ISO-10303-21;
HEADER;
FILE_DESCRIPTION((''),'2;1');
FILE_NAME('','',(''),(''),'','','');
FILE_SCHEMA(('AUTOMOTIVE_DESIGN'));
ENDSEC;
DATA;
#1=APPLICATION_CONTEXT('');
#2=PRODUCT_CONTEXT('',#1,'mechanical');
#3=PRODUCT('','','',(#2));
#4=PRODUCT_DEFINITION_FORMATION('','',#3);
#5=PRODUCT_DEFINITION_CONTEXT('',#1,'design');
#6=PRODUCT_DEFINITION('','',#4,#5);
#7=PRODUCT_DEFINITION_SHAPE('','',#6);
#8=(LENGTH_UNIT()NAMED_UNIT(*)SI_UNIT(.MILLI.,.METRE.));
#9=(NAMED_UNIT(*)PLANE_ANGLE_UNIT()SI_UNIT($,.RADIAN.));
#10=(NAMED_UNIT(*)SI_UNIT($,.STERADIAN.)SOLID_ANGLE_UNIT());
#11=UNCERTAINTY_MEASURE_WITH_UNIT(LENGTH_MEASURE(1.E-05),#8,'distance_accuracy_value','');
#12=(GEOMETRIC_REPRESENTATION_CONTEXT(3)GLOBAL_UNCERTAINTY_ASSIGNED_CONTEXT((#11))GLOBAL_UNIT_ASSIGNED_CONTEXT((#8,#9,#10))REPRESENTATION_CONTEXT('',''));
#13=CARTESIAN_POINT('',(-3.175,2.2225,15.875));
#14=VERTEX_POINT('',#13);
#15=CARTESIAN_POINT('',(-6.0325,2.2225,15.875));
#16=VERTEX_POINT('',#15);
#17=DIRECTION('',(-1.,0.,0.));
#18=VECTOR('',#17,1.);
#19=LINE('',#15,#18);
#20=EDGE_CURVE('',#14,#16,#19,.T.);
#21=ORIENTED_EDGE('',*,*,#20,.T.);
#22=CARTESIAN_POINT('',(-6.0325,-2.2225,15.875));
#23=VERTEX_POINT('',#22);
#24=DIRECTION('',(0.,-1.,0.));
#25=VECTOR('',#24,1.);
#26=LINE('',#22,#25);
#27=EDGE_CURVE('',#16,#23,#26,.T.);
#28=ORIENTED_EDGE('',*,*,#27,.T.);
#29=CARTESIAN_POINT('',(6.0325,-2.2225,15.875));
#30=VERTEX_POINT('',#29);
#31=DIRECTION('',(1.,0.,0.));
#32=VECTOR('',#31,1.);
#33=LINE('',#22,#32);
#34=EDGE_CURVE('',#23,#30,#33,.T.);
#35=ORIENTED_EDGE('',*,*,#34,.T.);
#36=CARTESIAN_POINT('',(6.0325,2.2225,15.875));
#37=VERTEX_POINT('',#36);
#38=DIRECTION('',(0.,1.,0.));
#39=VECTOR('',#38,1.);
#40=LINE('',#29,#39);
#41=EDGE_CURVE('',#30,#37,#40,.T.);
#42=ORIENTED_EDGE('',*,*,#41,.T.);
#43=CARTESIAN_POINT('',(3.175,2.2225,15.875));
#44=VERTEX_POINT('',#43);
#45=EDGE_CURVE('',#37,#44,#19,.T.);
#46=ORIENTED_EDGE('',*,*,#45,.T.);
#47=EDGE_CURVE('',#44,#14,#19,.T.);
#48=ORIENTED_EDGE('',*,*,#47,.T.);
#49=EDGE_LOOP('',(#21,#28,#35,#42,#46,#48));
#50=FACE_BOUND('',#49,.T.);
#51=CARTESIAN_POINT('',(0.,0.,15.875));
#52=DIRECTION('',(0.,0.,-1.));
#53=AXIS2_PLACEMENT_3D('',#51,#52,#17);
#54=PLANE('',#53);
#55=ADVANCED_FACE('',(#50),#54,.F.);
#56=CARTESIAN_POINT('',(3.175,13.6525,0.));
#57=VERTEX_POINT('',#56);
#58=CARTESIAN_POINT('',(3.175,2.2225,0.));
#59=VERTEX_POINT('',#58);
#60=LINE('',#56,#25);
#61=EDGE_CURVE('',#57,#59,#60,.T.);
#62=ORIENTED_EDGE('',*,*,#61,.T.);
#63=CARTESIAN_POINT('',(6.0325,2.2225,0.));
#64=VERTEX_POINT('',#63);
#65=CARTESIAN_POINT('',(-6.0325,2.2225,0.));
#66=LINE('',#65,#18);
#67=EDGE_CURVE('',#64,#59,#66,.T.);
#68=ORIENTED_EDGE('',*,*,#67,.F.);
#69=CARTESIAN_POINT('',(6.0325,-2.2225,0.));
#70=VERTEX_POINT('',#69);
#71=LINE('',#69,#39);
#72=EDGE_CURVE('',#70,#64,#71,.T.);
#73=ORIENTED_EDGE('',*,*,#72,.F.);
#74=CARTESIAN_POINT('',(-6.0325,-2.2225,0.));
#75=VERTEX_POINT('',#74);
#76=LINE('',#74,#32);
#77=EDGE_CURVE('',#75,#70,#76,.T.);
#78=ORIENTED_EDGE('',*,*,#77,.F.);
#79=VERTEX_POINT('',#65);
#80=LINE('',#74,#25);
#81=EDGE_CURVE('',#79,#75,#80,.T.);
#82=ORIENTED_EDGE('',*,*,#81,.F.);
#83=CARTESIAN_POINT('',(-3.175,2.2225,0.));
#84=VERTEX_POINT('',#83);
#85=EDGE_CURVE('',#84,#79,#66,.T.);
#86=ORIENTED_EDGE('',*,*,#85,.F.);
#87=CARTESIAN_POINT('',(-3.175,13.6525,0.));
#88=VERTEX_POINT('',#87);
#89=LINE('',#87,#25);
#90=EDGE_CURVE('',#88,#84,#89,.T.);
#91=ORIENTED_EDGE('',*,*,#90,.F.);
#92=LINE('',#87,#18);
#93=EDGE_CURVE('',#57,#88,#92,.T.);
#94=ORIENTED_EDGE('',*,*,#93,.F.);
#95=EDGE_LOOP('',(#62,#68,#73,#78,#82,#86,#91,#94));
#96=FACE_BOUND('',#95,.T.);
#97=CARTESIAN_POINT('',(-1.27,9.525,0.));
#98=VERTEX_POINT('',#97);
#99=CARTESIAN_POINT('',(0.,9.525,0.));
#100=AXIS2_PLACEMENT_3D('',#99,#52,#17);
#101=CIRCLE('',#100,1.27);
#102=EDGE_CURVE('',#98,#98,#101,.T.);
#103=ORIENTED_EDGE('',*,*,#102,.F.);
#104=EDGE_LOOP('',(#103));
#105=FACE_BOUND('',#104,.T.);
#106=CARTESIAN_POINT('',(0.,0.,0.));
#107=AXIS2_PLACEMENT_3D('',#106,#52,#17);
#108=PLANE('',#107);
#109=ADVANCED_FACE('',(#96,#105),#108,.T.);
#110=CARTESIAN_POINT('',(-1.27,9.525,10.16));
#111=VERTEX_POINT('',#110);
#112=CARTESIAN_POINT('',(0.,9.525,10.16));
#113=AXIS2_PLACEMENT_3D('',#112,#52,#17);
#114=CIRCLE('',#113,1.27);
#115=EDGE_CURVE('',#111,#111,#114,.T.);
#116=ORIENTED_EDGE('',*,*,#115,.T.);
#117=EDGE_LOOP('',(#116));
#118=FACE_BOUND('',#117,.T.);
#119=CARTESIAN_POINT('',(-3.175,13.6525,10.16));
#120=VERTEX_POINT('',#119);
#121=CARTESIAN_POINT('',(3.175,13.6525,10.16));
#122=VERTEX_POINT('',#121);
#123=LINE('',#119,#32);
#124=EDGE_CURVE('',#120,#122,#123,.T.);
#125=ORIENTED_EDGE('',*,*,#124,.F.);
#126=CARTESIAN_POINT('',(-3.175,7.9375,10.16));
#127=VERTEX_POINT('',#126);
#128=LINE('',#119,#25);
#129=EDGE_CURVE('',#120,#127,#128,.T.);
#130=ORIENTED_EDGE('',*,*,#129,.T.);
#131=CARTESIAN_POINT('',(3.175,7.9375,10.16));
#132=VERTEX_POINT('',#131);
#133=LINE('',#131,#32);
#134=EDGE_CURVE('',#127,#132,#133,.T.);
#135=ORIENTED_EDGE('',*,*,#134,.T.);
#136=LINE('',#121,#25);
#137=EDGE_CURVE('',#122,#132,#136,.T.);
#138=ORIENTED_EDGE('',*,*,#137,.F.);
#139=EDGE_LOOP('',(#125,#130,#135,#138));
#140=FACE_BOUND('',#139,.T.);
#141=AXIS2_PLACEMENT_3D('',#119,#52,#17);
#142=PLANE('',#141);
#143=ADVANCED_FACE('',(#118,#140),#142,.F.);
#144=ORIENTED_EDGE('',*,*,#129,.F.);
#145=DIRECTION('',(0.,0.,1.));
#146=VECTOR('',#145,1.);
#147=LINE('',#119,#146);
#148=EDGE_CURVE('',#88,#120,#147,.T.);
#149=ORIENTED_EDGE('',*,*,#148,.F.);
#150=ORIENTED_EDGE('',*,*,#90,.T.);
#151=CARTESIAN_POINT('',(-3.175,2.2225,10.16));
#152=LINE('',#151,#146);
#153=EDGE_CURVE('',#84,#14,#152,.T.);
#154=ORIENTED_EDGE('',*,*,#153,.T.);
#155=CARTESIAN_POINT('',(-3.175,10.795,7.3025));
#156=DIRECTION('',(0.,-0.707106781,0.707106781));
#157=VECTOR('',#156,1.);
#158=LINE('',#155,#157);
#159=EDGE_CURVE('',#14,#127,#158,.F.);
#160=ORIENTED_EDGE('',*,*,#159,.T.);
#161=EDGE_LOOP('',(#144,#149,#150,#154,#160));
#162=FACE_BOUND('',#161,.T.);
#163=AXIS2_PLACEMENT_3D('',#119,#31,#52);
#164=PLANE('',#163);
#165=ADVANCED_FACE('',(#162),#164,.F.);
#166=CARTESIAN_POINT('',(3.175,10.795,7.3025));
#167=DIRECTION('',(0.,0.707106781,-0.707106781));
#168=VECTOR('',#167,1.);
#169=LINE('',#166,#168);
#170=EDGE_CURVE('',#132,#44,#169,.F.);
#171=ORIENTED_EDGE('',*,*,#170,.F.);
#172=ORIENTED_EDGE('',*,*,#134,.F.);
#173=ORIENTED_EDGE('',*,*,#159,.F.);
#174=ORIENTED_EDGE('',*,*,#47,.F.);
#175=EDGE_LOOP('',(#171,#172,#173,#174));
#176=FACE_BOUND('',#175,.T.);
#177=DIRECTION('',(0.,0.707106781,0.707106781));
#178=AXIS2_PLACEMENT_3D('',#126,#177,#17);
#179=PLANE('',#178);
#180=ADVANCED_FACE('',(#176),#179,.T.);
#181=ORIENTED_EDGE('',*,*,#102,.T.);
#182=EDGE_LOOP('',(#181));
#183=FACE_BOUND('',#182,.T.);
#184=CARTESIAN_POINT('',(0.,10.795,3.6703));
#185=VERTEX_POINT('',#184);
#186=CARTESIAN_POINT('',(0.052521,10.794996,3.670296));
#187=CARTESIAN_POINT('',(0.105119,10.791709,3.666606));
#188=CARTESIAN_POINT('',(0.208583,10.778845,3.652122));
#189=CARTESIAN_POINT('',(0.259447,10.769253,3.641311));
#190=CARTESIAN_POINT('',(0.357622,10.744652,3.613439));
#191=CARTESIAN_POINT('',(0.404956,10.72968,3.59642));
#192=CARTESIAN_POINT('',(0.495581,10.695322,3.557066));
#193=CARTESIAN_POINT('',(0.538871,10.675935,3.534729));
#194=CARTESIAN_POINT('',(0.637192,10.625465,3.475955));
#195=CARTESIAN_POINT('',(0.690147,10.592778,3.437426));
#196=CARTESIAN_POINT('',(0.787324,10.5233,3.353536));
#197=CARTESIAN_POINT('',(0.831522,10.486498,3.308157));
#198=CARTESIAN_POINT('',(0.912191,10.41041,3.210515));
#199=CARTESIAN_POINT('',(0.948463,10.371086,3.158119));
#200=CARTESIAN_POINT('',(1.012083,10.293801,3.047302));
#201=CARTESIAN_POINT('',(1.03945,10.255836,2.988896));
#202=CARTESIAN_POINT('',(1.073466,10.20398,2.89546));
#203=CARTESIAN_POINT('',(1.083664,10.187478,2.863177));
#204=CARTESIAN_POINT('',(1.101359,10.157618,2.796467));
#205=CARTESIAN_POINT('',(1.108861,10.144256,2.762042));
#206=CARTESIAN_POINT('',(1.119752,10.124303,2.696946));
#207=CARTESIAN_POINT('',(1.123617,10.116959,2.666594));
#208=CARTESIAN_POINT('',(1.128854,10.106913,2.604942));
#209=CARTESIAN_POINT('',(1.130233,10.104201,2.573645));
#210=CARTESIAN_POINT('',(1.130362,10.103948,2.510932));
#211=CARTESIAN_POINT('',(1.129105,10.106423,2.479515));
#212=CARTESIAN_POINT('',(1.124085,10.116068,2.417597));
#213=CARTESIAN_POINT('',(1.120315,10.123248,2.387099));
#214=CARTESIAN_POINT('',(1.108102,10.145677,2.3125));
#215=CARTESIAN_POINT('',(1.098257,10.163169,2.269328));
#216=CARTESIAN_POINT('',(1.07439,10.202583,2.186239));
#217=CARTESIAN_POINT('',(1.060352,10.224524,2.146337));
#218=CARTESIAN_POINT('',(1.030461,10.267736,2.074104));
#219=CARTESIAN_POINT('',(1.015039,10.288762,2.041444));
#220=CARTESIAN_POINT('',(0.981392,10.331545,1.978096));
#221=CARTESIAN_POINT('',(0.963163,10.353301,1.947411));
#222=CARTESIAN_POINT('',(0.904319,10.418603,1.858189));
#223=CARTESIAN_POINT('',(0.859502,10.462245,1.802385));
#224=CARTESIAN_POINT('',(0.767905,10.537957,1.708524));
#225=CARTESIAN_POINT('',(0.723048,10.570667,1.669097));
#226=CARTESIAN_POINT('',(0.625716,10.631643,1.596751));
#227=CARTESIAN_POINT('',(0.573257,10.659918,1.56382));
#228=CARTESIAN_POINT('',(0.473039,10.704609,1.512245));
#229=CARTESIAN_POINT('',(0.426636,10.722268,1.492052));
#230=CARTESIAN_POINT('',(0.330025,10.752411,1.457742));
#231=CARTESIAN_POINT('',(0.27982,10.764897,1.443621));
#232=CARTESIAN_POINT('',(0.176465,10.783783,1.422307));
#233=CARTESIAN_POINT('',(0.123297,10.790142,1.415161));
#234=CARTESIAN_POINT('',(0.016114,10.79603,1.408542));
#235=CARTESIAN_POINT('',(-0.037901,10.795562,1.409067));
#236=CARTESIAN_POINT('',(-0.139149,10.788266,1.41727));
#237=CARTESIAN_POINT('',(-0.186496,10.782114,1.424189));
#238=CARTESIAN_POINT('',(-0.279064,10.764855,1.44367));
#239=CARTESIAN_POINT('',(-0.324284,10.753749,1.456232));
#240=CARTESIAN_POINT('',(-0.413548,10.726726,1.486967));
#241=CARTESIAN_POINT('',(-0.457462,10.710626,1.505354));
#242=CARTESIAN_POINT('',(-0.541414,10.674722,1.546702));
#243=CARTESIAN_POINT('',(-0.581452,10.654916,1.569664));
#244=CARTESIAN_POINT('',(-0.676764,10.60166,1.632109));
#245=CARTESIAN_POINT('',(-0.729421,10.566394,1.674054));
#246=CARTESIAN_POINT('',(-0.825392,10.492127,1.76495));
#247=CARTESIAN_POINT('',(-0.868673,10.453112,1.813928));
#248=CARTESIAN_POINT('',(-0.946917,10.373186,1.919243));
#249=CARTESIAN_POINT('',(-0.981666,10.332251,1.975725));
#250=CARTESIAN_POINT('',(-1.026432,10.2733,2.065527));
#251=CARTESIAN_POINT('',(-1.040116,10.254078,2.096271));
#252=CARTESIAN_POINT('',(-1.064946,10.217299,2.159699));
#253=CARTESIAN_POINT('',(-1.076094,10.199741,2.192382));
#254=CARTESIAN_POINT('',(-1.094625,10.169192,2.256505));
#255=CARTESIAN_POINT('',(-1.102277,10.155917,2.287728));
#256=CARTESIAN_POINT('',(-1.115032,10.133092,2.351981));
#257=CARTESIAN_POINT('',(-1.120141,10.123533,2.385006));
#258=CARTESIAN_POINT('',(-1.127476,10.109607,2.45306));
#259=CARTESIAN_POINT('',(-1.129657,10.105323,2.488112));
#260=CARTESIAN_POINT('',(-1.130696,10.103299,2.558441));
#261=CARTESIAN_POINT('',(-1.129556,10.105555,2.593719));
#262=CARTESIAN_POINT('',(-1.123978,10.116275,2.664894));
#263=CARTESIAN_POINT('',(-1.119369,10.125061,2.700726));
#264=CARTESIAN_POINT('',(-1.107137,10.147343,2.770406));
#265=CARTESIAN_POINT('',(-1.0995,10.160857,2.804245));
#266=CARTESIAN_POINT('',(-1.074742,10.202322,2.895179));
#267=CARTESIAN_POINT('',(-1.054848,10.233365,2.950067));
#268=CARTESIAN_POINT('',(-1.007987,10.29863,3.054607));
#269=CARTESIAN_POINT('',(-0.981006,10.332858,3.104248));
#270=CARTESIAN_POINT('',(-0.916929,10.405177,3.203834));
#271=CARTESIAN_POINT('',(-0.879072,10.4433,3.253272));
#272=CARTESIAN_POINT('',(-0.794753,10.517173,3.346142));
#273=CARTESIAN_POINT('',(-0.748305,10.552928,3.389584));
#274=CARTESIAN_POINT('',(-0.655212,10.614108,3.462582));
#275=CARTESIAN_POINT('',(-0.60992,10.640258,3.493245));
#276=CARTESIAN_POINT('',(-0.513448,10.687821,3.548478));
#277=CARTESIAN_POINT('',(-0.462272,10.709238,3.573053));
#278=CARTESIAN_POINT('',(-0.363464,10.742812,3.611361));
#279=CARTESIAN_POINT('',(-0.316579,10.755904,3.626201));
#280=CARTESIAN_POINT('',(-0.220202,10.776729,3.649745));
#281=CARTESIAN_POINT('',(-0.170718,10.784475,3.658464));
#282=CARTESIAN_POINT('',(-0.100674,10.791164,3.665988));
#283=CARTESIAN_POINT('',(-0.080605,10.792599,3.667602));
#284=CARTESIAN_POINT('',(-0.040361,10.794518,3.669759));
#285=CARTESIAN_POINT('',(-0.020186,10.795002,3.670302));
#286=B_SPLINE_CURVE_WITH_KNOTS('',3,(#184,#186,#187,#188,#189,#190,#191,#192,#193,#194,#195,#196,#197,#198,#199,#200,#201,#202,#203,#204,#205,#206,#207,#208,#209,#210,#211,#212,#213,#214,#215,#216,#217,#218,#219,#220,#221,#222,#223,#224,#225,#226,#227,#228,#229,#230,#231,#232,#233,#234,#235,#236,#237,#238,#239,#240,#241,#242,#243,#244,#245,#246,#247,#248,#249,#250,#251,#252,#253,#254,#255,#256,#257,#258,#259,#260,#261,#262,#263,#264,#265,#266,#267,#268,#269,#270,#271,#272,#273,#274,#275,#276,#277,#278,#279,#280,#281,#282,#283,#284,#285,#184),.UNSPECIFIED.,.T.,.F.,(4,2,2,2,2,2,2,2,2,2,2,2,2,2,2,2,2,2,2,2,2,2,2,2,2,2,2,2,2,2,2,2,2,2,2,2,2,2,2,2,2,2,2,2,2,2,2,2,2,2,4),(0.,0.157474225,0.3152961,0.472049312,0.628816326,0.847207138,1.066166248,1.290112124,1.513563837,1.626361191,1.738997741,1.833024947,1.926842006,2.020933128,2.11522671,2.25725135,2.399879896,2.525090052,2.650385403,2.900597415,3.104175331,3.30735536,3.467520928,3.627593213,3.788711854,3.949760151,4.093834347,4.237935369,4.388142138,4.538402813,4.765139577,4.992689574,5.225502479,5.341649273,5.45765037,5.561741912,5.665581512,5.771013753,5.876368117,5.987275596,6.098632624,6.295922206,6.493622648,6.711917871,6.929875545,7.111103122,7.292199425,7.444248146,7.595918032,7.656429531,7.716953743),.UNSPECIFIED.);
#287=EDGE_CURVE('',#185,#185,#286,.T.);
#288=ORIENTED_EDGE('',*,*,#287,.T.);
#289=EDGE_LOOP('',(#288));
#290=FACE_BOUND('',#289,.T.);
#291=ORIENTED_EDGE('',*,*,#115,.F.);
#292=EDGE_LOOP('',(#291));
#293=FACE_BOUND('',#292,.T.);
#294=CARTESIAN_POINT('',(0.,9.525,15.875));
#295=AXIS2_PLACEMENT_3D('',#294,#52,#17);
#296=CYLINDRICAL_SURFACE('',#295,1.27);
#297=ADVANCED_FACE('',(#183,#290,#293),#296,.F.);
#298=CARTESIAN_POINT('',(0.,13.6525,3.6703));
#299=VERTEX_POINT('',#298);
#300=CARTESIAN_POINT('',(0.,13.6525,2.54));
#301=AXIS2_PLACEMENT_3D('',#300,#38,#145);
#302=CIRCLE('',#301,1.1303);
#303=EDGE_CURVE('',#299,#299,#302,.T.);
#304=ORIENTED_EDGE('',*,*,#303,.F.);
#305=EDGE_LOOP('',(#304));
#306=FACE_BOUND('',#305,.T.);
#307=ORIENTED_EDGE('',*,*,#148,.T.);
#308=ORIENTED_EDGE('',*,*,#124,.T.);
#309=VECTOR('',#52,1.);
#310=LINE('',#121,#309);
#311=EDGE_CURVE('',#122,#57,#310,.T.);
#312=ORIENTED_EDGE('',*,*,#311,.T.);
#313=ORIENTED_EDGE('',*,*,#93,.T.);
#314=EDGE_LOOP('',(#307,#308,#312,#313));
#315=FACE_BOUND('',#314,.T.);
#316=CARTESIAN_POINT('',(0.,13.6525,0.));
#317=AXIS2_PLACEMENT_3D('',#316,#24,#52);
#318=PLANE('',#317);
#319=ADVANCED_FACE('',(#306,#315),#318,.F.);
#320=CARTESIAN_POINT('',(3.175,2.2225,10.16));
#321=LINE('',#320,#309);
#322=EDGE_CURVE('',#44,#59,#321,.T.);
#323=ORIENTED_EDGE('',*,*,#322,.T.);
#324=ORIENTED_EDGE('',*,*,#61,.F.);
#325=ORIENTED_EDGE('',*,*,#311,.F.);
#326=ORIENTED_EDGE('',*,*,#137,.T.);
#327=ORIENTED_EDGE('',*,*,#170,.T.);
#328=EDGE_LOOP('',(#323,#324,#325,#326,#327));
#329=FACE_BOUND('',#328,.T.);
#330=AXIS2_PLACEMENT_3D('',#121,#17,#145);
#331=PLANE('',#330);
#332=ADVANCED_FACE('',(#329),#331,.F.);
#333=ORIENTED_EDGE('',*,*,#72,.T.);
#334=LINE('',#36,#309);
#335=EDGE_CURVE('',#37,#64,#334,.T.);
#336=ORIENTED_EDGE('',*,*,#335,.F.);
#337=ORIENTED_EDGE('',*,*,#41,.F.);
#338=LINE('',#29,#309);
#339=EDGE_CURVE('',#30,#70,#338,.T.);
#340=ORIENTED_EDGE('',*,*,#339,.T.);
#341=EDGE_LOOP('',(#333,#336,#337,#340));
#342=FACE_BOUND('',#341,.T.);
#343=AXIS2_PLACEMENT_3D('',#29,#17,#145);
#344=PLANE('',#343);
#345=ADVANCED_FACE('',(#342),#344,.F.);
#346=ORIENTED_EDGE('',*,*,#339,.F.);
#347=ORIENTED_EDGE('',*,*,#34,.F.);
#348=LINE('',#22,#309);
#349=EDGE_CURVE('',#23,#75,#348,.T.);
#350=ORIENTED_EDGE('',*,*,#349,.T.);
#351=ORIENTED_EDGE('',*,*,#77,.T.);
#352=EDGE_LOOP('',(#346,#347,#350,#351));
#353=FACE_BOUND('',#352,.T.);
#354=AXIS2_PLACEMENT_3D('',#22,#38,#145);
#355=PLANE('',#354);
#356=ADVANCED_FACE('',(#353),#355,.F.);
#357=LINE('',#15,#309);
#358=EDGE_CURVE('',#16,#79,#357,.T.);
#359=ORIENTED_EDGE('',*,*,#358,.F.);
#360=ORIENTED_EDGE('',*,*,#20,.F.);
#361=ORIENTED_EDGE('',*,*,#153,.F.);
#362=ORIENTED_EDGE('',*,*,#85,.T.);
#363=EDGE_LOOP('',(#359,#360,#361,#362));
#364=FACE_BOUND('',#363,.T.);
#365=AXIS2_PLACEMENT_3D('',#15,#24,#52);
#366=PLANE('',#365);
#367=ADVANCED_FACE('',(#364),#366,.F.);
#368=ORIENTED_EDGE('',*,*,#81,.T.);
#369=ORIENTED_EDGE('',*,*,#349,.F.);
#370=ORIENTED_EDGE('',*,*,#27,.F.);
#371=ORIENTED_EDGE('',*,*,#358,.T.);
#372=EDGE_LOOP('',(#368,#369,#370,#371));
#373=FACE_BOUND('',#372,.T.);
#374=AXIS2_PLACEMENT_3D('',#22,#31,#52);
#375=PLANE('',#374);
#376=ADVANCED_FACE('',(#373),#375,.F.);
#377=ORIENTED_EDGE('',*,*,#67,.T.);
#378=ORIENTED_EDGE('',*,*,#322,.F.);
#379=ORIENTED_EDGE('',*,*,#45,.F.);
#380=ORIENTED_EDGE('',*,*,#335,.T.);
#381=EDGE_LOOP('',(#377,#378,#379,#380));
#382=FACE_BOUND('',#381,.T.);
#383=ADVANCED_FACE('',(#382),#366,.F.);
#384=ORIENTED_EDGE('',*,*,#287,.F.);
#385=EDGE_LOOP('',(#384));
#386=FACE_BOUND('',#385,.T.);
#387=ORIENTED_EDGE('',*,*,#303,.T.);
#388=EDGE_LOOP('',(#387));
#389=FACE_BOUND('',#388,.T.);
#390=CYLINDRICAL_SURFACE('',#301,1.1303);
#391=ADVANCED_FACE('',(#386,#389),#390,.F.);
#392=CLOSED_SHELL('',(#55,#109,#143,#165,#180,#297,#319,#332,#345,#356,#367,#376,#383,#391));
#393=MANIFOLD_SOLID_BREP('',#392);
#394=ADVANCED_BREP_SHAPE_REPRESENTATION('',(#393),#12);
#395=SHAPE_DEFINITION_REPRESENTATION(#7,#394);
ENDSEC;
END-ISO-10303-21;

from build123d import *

# Parameters (mm, degrees)
SKETCH1_W                  = 12.065
SKETCH1_H                  = 4.445
BASE_DEPTH                 = 15.875
SKETCH7_W                  = 6.35
SKETCH7_H                  = 10.16
BOSS_EXTRUDE1_DEPTH        = 11.43
SKETCH3_R                  = 1.27
SHAFTHOLE_DEPTH            = 22.78984712
F_4_40_TAPPED_HOLE1_REACH  = 25.247
F_4_40_TAPPED_HOLE1_BORE_R = 1.1303
CHAMFER1_SIZE              = 5.715


with BuildPart() as part:
    # Sketch1 → Base (new body)
    with BuildSketch(Plane.XY):
        Rectangle(SKETCH1_W, SKETCH1_H)
    extrude(amount=BASE_DEPTH)

    # Sketch7 → Boss-Extrude1 (add)
    with BuildSketch(Plane(origin=(0, 2.2225, 0), x_dir=(1, 0, 0), z_dir=(0, 1, 0))):
        with Locations((0, -5.08)):
            Rectangle(SKETCH7_W, SKETCH7_H)
    extrude(amount=BOSS_EXTRUDE1_DEPTH)

    # Sketch3 → ShaftHole (cut, through all)
    with BuildSketch(Plane(origin=(0, 0, 0), x_dir=(-1, 0, 0), z_dir=(0, 0, -1))):
        with Locations((0, 9.525)):
            Circle(SKETCH3_R)
    extrude(amount=-SHAFTHOLE_DEPTH, mode=Mode.SUBTRACT)

    # #4-40 Tapped Hole1 bore → #4-40 Tapped Hole1 (cut, up to next)
    with BuildSketch(Plane(origin=(0, 13.6525, 0), x_dir=(1, 0, 0), z_dir=(0, 1, 0)), mode=Mode.PRIVATE) as f_4_40_tapped_hole1_sk1:
        with Locations((0, -2.54)):
            Circle(F_4_40_TAPPED_HOLE1_BORE_R)
    f_4_40_tapped_hole1_tool1 = extrude(f_4_40_tapped_hole1_sk1.sketch, amount=-F_4_40_TAPPED_HOLE1_REACH, mode=Mode.PRIVATE) & part.part
    add(f_4_40_tapped_hole1_tool1.solids().sort_by_distance((0, 13.6525, 2.54))[0], mode=Mode.SUBTRACT)

    # Chamfer1
    chamfer1_edges = [part.edges().sort_by_distance(p)[0] for p in [
        (0, 2.2225, 10.16),
    ]]
    chamfer(chamfer1_edges, length=CHAMFER1_SIZE - 0.0001)  # a hair under: the kernel refuses the full size


solid = part.part
